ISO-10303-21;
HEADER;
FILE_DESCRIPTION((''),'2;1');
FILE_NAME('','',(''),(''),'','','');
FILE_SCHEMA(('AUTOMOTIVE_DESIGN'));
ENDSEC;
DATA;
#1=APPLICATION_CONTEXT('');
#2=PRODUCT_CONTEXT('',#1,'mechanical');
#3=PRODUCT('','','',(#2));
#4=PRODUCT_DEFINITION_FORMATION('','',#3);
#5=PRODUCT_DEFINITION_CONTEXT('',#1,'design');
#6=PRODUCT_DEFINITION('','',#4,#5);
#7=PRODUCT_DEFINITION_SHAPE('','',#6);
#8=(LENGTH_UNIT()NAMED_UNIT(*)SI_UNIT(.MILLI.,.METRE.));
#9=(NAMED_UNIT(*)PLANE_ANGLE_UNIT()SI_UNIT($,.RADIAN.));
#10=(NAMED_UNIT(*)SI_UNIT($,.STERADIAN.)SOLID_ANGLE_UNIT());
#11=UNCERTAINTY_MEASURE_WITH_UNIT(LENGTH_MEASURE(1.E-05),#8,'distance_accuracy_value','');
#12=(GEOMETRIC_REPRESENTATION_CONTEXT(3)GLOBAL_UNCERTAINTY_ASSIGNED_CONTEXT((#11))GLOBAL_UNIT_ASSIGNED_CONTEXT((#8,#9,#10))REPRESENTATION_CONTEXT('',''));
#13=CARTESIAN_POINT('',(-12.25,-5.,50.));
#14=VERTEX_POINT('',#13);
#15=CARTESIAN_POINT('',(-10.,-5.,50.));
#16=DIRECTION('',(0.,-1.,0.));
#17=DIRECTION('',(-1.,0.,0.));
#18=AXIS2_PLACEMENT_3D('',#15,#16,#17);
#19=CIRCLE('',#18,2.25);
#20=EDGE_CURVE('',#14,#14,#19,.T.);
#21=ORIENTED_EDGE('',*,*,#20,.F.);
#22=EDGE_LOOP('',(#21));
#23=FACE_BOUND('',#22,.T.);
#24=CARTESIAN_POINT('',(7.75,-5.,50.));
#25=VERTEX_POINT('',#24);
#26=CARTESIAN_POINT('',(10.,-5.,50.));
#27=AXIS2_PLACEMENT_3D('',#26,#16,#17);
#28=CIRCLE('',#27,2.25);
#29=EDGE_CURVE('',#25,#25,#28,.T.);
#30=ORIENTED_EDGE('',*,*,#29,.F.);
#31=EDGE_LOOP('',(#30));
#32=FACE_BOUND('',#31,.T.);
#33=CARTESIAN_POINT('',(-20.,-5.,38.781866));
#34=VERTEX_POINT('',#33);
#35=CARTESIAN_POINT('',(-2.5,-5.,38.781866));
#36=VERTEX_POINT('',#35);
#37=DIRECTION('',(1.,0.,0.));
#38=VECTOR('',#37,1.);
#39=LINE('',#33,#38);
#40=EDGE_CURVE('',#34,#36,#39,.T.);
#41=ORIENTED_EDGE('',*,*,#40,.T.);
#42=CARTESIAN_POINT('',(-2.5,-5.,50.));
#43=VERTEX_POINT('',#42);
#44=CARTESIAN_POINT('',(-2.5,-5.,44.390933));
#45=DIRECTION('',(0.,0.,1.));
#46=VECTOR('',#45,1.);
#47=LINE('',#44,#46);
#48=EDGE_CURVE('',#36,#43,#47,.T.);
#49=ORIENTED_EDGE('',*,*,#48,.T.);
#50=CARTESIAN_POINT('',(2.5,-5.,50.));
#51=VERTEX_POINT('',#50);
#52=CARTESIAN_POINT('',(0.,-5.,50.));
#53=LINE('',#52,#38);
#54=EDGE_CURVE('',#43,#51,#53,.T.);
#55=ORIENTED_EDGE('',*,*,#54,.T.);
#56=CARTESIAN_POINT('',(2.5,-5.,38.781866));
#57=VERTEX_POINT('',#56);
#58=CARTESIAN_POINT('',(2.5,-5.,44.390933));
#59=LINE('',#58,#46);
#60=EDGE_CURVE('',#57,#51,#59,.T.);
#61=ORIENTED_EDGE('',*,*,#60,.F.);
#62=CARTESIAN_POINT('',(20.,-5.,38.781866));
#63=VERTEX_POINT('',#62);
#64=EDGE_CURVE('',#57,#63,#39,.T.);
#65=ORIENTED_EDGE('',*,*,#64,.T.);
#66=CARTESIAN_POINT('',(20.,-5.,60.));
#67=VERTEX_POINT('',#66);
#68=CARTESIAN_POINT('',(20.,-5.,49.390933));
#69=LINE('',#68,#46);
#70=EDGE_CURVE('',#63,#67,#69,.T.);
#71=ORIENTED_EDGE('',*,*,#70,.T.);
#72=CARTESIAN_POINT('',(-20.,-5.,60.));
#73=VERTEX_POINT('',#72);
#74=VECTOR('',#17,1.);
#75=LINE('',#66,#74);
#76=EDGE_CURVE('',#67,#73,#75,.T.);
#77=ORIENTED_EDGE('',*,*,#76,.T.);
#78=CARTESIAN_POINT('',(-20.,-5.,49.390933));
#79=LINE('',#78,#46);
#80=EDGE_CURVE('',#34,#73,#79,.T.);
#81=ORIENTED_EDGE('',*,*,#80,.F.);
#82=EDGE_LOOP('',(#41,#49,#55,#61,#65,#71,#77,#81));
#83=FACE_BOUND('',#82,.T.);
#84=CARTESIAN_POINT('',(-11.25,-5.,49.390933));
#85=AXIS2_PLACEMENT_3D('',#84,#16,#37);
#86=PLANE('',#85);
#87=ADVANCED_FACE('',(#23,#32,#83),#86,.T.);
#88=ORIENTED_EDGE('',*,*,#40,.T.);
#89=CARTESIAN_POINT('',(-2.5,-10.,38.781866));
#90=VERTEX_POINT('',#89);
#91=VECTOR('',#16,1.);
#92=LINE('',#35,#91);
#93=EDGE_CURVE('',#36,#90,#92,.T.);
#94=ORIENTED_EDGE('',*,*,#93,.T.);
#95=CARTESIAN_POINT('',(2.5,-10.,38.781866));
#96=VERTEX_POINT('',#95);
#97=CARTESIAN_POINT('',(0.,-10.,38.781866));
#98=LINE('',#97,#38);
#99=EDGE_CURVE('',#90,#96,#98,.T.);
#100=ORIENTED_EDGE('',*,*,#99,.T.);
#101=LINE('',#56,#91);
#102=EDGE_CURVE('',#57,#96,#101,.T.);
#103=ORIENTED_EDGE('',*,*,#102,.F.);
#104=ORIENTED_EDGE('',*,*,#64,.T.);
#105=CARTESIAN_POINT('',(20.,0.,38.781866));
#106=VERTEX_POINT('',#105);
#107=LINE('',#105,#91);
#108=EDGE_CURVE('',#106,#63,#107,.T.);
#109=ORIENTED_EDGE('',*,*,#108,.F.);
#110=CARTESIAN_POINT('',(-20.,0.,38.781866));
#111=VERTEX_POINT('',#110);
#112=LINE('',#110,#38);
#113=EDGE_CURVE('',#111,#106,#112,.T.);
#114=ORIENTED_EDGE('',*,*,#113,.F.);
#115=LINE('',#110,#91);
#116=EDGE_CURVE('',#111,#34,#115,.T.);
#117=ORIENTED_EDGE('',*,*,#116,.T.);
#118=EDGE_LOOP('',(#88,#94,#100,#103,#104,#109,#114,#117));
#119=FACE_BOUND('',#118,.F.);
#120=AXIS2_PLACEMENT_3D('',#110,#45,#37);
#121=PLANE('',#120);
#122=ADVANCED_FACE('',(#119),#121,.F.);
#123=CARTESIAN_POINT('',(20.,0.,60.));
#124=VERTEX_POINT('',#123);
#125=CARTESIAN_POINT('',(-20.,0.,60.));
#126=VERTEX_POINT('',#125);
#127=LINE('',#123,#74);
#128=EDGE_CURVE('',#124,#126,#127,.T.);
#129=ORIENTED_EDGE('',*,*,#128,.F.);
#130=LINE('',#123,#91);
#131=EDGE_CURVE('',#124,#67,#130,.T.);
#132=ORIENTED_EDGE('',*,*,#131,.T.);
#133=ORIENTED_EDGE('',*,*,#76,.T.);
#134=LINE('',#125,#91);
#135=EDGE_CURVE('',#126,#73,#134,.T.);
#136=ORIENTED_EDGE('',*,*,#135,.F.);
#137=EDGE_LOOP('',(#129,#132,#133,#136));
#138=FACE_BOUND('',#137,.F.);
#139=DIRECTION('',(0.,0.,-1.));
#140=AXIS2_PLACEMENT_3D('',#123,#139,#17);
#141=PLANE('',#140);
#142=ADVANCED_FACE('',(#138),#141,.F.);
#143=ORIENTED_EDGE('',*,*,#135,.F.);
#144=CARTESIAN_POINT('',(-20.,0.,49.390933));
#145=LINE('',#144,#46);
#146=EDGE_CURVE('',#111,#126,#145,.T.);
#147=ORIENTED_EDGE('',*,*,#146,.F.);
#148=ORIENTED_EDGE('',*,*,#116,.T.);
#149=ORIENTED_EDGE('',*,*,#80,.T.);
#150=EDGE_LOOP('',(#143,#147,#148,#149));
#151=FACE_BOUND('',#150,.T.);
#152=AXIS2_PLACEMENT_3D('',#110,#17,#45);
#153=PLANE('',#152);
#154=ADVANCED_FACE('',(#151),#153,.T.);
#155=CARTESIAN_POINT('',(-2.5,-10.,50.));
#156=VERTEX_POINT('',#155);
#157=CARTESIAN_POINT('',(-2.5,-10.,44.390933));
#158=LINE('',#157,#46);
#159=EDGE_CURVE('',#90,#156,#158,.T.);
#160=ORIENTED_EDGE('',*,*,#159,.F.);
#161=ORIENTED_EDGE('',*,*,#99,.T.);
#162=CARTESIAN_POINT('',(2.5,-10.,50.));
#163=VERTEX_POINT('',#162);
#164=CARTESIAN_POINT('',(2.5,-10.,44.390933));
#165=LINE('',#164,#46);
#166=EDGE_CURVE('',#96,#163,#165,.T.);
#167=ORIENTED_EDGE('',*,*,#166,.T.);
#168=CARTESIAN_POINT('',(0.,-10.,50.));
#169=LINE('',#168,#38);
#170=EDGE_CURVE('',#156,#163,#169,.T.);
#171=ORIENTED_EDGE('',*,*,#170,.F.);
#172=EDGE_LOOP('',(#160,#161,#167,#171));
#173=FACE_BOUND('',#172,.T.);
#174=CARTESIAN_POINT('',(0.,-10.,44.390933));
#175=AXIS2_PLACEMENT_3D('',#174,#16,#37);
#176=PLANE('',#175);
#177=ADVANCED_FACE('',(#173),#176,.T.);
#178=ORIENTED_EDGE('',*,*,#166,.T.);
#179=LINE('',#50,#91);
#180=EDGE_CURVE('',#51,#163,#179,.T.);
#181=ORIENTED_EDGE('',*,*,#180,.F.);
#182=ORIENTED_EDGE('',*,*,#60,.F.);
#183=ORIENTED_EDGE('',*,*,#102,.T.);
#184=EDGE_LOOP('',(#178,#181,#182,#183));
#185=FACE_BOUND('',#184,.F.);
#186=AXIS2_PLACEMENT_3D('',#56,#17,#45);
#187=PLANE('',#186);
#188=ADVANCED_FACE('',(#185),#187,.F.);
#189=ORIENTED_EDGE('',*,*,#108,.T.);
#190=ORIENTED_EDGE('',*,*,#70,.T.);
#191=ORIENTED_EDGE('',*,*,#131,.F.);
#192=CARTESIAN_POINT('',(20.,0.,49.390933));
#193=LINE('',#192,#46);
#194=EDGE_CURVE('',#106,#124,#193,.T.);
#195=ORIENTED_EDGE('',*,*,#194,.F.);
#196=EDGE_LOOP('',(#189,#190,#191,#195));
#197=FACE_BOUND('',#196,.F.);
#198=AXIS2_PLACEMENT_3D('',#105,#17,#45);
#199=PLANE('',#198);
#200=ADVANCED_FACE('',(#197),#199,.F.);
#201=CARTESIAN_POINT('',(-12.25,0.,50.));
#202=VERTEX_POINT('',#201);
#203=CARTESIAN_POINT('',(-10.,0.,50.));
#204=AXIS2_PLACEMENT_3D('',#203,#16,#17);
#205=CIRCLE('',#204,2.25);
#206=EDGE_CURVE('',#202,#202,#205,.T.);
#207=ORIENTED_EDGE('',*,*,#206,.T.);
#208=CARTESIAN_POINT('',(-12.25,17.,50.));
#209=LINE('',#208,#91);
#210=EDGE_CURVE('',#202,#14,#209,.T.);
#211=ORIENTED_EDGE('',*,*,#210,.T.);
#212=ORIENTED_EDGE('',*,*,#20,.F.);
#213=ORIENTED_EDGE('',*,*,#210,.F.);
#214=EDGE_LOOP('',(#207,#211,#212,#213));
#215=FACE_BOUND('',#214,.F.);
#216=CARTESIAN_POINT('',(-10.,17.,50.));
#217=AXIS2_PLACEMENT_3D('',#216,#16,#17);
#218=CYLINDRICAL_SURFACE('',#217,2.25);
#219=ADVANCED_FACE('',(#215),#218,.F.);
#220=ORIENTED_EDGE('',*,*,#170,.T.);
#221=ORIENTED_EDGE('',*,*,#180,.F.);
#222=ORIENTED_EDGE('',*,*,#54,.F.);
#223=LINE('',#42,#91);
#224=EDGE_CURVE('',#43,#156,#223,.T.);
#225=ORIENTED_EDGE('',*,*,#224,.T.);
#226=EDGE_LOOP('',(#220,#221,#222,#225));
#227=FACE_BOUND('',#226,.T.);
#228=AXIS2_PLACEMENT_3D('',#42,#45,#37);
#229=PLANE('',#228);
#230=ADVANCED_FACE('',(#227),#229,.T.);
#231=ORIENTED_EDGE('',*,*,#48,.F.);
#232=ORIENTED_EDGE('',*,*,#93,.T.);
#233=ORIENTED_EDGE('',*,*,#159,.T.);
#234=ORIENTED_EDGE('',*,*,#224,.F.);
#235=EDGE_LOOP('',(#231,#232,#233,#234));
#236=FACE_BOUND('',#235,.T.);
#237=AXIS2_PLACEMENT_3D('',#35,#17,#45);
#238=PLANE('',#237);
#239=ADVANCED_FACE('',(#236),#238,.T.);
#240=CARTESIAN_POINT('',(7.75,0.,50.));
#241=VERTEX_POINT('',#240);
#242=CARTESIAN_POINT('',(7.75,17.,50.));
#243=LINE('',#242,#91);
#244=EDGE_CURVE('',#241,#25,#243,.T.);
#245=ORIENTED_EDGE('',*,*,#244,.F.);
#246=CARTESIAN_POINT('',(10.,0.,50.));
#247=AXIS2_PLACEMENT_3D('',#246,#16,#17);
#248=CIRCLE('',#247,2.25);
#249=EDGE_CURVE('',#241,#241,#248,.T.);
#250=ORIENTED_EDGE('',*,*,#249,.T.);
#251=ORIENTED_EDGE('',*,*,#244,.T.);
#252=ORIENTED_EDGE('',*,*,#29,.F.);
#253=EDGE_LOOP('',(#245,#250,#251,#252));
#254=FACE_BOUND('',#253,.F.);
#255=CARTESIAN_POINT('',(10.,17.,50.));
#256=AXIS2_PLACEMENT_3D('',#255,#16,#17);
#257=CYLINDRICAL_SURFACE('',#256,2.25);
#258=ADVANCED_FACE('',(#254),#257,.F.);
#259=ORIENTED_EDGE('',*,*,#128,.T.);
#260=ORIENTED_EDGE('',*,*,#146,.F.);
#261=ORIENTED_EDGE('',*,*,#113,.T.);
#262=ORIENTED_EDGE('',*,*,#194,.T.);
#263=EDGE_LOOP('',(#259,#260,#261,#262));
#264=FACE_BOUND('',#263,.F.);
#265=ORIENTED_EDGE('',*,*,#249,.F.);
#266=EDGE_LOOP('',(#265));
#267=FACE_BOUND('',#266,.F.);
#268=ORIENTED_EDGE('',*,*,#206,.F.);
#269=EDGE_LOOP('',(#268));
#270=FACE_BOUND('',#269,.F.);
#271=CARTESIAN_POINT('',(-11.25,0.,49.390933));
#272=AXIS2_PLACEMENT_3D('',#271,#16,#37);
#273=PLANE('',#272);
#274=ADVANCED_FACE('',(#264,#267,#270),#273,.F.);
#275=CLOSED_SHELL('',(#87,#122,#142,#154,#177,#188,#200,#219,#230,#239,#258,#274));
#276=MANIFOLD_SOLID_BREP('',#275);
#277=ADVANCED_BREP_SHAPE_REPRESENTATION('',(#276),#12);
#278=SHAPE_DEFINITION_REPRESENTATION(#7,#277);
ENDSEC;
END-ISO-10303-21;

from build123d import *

# Parameters (mm, degrees)
F0_W     = 17.5
F0_H     = 21.2181335688
F0_W_2   = 5
F1_DEPTH = 5
F2_W     = 5
F2_H     = 11.2181335688
F3_DEPTH = 5
F4_D     = 4.5
F4_DEPTH = 17
F4_TIP   = 1.3519363928


with BuildPart() as f1:
    # F0 (on Front) → F1 (new body)
    with BuildSketch(Plane.XZ):
        with Locations((-11.25, 49.3909332156)):
            Rectangle(F0_W, F0_H)
        with Locations((0, 49.3909332156)):
            Rectangle(F0_W_2, F0_H)
        with Locations((11.25, 49.3909332156)):
            Rectangle(F0_W, F0_H)
    extrude(amount=F1_DEPTH)

    # F2 (on face) → F3 (join)
    with BuildSketch(Plane.XZ.offset(5)):
        with Locations((0, 44.3909332156)):
            Rectangle(F2_W, F2_H)
    extrude(amount=F3_DEPTH)

    # F4
    with Locations(Plane(origin=(0, 0, 0), x_dir=(1, 0, 0), z_dir=(0, 1, 0))):
        with Locations((10, -50), (-10, -50)):
            Hole(F4_D / 2, depth=F4_DEPTH)
            with Locations((0, 0, -(F4_DEPTH + F4_TIP / 2))):  # 118° drill point
                Cone(0, F4_D / 2, F4_TIP, mode=Mode.SUBTRACT)


solid = f1.part
